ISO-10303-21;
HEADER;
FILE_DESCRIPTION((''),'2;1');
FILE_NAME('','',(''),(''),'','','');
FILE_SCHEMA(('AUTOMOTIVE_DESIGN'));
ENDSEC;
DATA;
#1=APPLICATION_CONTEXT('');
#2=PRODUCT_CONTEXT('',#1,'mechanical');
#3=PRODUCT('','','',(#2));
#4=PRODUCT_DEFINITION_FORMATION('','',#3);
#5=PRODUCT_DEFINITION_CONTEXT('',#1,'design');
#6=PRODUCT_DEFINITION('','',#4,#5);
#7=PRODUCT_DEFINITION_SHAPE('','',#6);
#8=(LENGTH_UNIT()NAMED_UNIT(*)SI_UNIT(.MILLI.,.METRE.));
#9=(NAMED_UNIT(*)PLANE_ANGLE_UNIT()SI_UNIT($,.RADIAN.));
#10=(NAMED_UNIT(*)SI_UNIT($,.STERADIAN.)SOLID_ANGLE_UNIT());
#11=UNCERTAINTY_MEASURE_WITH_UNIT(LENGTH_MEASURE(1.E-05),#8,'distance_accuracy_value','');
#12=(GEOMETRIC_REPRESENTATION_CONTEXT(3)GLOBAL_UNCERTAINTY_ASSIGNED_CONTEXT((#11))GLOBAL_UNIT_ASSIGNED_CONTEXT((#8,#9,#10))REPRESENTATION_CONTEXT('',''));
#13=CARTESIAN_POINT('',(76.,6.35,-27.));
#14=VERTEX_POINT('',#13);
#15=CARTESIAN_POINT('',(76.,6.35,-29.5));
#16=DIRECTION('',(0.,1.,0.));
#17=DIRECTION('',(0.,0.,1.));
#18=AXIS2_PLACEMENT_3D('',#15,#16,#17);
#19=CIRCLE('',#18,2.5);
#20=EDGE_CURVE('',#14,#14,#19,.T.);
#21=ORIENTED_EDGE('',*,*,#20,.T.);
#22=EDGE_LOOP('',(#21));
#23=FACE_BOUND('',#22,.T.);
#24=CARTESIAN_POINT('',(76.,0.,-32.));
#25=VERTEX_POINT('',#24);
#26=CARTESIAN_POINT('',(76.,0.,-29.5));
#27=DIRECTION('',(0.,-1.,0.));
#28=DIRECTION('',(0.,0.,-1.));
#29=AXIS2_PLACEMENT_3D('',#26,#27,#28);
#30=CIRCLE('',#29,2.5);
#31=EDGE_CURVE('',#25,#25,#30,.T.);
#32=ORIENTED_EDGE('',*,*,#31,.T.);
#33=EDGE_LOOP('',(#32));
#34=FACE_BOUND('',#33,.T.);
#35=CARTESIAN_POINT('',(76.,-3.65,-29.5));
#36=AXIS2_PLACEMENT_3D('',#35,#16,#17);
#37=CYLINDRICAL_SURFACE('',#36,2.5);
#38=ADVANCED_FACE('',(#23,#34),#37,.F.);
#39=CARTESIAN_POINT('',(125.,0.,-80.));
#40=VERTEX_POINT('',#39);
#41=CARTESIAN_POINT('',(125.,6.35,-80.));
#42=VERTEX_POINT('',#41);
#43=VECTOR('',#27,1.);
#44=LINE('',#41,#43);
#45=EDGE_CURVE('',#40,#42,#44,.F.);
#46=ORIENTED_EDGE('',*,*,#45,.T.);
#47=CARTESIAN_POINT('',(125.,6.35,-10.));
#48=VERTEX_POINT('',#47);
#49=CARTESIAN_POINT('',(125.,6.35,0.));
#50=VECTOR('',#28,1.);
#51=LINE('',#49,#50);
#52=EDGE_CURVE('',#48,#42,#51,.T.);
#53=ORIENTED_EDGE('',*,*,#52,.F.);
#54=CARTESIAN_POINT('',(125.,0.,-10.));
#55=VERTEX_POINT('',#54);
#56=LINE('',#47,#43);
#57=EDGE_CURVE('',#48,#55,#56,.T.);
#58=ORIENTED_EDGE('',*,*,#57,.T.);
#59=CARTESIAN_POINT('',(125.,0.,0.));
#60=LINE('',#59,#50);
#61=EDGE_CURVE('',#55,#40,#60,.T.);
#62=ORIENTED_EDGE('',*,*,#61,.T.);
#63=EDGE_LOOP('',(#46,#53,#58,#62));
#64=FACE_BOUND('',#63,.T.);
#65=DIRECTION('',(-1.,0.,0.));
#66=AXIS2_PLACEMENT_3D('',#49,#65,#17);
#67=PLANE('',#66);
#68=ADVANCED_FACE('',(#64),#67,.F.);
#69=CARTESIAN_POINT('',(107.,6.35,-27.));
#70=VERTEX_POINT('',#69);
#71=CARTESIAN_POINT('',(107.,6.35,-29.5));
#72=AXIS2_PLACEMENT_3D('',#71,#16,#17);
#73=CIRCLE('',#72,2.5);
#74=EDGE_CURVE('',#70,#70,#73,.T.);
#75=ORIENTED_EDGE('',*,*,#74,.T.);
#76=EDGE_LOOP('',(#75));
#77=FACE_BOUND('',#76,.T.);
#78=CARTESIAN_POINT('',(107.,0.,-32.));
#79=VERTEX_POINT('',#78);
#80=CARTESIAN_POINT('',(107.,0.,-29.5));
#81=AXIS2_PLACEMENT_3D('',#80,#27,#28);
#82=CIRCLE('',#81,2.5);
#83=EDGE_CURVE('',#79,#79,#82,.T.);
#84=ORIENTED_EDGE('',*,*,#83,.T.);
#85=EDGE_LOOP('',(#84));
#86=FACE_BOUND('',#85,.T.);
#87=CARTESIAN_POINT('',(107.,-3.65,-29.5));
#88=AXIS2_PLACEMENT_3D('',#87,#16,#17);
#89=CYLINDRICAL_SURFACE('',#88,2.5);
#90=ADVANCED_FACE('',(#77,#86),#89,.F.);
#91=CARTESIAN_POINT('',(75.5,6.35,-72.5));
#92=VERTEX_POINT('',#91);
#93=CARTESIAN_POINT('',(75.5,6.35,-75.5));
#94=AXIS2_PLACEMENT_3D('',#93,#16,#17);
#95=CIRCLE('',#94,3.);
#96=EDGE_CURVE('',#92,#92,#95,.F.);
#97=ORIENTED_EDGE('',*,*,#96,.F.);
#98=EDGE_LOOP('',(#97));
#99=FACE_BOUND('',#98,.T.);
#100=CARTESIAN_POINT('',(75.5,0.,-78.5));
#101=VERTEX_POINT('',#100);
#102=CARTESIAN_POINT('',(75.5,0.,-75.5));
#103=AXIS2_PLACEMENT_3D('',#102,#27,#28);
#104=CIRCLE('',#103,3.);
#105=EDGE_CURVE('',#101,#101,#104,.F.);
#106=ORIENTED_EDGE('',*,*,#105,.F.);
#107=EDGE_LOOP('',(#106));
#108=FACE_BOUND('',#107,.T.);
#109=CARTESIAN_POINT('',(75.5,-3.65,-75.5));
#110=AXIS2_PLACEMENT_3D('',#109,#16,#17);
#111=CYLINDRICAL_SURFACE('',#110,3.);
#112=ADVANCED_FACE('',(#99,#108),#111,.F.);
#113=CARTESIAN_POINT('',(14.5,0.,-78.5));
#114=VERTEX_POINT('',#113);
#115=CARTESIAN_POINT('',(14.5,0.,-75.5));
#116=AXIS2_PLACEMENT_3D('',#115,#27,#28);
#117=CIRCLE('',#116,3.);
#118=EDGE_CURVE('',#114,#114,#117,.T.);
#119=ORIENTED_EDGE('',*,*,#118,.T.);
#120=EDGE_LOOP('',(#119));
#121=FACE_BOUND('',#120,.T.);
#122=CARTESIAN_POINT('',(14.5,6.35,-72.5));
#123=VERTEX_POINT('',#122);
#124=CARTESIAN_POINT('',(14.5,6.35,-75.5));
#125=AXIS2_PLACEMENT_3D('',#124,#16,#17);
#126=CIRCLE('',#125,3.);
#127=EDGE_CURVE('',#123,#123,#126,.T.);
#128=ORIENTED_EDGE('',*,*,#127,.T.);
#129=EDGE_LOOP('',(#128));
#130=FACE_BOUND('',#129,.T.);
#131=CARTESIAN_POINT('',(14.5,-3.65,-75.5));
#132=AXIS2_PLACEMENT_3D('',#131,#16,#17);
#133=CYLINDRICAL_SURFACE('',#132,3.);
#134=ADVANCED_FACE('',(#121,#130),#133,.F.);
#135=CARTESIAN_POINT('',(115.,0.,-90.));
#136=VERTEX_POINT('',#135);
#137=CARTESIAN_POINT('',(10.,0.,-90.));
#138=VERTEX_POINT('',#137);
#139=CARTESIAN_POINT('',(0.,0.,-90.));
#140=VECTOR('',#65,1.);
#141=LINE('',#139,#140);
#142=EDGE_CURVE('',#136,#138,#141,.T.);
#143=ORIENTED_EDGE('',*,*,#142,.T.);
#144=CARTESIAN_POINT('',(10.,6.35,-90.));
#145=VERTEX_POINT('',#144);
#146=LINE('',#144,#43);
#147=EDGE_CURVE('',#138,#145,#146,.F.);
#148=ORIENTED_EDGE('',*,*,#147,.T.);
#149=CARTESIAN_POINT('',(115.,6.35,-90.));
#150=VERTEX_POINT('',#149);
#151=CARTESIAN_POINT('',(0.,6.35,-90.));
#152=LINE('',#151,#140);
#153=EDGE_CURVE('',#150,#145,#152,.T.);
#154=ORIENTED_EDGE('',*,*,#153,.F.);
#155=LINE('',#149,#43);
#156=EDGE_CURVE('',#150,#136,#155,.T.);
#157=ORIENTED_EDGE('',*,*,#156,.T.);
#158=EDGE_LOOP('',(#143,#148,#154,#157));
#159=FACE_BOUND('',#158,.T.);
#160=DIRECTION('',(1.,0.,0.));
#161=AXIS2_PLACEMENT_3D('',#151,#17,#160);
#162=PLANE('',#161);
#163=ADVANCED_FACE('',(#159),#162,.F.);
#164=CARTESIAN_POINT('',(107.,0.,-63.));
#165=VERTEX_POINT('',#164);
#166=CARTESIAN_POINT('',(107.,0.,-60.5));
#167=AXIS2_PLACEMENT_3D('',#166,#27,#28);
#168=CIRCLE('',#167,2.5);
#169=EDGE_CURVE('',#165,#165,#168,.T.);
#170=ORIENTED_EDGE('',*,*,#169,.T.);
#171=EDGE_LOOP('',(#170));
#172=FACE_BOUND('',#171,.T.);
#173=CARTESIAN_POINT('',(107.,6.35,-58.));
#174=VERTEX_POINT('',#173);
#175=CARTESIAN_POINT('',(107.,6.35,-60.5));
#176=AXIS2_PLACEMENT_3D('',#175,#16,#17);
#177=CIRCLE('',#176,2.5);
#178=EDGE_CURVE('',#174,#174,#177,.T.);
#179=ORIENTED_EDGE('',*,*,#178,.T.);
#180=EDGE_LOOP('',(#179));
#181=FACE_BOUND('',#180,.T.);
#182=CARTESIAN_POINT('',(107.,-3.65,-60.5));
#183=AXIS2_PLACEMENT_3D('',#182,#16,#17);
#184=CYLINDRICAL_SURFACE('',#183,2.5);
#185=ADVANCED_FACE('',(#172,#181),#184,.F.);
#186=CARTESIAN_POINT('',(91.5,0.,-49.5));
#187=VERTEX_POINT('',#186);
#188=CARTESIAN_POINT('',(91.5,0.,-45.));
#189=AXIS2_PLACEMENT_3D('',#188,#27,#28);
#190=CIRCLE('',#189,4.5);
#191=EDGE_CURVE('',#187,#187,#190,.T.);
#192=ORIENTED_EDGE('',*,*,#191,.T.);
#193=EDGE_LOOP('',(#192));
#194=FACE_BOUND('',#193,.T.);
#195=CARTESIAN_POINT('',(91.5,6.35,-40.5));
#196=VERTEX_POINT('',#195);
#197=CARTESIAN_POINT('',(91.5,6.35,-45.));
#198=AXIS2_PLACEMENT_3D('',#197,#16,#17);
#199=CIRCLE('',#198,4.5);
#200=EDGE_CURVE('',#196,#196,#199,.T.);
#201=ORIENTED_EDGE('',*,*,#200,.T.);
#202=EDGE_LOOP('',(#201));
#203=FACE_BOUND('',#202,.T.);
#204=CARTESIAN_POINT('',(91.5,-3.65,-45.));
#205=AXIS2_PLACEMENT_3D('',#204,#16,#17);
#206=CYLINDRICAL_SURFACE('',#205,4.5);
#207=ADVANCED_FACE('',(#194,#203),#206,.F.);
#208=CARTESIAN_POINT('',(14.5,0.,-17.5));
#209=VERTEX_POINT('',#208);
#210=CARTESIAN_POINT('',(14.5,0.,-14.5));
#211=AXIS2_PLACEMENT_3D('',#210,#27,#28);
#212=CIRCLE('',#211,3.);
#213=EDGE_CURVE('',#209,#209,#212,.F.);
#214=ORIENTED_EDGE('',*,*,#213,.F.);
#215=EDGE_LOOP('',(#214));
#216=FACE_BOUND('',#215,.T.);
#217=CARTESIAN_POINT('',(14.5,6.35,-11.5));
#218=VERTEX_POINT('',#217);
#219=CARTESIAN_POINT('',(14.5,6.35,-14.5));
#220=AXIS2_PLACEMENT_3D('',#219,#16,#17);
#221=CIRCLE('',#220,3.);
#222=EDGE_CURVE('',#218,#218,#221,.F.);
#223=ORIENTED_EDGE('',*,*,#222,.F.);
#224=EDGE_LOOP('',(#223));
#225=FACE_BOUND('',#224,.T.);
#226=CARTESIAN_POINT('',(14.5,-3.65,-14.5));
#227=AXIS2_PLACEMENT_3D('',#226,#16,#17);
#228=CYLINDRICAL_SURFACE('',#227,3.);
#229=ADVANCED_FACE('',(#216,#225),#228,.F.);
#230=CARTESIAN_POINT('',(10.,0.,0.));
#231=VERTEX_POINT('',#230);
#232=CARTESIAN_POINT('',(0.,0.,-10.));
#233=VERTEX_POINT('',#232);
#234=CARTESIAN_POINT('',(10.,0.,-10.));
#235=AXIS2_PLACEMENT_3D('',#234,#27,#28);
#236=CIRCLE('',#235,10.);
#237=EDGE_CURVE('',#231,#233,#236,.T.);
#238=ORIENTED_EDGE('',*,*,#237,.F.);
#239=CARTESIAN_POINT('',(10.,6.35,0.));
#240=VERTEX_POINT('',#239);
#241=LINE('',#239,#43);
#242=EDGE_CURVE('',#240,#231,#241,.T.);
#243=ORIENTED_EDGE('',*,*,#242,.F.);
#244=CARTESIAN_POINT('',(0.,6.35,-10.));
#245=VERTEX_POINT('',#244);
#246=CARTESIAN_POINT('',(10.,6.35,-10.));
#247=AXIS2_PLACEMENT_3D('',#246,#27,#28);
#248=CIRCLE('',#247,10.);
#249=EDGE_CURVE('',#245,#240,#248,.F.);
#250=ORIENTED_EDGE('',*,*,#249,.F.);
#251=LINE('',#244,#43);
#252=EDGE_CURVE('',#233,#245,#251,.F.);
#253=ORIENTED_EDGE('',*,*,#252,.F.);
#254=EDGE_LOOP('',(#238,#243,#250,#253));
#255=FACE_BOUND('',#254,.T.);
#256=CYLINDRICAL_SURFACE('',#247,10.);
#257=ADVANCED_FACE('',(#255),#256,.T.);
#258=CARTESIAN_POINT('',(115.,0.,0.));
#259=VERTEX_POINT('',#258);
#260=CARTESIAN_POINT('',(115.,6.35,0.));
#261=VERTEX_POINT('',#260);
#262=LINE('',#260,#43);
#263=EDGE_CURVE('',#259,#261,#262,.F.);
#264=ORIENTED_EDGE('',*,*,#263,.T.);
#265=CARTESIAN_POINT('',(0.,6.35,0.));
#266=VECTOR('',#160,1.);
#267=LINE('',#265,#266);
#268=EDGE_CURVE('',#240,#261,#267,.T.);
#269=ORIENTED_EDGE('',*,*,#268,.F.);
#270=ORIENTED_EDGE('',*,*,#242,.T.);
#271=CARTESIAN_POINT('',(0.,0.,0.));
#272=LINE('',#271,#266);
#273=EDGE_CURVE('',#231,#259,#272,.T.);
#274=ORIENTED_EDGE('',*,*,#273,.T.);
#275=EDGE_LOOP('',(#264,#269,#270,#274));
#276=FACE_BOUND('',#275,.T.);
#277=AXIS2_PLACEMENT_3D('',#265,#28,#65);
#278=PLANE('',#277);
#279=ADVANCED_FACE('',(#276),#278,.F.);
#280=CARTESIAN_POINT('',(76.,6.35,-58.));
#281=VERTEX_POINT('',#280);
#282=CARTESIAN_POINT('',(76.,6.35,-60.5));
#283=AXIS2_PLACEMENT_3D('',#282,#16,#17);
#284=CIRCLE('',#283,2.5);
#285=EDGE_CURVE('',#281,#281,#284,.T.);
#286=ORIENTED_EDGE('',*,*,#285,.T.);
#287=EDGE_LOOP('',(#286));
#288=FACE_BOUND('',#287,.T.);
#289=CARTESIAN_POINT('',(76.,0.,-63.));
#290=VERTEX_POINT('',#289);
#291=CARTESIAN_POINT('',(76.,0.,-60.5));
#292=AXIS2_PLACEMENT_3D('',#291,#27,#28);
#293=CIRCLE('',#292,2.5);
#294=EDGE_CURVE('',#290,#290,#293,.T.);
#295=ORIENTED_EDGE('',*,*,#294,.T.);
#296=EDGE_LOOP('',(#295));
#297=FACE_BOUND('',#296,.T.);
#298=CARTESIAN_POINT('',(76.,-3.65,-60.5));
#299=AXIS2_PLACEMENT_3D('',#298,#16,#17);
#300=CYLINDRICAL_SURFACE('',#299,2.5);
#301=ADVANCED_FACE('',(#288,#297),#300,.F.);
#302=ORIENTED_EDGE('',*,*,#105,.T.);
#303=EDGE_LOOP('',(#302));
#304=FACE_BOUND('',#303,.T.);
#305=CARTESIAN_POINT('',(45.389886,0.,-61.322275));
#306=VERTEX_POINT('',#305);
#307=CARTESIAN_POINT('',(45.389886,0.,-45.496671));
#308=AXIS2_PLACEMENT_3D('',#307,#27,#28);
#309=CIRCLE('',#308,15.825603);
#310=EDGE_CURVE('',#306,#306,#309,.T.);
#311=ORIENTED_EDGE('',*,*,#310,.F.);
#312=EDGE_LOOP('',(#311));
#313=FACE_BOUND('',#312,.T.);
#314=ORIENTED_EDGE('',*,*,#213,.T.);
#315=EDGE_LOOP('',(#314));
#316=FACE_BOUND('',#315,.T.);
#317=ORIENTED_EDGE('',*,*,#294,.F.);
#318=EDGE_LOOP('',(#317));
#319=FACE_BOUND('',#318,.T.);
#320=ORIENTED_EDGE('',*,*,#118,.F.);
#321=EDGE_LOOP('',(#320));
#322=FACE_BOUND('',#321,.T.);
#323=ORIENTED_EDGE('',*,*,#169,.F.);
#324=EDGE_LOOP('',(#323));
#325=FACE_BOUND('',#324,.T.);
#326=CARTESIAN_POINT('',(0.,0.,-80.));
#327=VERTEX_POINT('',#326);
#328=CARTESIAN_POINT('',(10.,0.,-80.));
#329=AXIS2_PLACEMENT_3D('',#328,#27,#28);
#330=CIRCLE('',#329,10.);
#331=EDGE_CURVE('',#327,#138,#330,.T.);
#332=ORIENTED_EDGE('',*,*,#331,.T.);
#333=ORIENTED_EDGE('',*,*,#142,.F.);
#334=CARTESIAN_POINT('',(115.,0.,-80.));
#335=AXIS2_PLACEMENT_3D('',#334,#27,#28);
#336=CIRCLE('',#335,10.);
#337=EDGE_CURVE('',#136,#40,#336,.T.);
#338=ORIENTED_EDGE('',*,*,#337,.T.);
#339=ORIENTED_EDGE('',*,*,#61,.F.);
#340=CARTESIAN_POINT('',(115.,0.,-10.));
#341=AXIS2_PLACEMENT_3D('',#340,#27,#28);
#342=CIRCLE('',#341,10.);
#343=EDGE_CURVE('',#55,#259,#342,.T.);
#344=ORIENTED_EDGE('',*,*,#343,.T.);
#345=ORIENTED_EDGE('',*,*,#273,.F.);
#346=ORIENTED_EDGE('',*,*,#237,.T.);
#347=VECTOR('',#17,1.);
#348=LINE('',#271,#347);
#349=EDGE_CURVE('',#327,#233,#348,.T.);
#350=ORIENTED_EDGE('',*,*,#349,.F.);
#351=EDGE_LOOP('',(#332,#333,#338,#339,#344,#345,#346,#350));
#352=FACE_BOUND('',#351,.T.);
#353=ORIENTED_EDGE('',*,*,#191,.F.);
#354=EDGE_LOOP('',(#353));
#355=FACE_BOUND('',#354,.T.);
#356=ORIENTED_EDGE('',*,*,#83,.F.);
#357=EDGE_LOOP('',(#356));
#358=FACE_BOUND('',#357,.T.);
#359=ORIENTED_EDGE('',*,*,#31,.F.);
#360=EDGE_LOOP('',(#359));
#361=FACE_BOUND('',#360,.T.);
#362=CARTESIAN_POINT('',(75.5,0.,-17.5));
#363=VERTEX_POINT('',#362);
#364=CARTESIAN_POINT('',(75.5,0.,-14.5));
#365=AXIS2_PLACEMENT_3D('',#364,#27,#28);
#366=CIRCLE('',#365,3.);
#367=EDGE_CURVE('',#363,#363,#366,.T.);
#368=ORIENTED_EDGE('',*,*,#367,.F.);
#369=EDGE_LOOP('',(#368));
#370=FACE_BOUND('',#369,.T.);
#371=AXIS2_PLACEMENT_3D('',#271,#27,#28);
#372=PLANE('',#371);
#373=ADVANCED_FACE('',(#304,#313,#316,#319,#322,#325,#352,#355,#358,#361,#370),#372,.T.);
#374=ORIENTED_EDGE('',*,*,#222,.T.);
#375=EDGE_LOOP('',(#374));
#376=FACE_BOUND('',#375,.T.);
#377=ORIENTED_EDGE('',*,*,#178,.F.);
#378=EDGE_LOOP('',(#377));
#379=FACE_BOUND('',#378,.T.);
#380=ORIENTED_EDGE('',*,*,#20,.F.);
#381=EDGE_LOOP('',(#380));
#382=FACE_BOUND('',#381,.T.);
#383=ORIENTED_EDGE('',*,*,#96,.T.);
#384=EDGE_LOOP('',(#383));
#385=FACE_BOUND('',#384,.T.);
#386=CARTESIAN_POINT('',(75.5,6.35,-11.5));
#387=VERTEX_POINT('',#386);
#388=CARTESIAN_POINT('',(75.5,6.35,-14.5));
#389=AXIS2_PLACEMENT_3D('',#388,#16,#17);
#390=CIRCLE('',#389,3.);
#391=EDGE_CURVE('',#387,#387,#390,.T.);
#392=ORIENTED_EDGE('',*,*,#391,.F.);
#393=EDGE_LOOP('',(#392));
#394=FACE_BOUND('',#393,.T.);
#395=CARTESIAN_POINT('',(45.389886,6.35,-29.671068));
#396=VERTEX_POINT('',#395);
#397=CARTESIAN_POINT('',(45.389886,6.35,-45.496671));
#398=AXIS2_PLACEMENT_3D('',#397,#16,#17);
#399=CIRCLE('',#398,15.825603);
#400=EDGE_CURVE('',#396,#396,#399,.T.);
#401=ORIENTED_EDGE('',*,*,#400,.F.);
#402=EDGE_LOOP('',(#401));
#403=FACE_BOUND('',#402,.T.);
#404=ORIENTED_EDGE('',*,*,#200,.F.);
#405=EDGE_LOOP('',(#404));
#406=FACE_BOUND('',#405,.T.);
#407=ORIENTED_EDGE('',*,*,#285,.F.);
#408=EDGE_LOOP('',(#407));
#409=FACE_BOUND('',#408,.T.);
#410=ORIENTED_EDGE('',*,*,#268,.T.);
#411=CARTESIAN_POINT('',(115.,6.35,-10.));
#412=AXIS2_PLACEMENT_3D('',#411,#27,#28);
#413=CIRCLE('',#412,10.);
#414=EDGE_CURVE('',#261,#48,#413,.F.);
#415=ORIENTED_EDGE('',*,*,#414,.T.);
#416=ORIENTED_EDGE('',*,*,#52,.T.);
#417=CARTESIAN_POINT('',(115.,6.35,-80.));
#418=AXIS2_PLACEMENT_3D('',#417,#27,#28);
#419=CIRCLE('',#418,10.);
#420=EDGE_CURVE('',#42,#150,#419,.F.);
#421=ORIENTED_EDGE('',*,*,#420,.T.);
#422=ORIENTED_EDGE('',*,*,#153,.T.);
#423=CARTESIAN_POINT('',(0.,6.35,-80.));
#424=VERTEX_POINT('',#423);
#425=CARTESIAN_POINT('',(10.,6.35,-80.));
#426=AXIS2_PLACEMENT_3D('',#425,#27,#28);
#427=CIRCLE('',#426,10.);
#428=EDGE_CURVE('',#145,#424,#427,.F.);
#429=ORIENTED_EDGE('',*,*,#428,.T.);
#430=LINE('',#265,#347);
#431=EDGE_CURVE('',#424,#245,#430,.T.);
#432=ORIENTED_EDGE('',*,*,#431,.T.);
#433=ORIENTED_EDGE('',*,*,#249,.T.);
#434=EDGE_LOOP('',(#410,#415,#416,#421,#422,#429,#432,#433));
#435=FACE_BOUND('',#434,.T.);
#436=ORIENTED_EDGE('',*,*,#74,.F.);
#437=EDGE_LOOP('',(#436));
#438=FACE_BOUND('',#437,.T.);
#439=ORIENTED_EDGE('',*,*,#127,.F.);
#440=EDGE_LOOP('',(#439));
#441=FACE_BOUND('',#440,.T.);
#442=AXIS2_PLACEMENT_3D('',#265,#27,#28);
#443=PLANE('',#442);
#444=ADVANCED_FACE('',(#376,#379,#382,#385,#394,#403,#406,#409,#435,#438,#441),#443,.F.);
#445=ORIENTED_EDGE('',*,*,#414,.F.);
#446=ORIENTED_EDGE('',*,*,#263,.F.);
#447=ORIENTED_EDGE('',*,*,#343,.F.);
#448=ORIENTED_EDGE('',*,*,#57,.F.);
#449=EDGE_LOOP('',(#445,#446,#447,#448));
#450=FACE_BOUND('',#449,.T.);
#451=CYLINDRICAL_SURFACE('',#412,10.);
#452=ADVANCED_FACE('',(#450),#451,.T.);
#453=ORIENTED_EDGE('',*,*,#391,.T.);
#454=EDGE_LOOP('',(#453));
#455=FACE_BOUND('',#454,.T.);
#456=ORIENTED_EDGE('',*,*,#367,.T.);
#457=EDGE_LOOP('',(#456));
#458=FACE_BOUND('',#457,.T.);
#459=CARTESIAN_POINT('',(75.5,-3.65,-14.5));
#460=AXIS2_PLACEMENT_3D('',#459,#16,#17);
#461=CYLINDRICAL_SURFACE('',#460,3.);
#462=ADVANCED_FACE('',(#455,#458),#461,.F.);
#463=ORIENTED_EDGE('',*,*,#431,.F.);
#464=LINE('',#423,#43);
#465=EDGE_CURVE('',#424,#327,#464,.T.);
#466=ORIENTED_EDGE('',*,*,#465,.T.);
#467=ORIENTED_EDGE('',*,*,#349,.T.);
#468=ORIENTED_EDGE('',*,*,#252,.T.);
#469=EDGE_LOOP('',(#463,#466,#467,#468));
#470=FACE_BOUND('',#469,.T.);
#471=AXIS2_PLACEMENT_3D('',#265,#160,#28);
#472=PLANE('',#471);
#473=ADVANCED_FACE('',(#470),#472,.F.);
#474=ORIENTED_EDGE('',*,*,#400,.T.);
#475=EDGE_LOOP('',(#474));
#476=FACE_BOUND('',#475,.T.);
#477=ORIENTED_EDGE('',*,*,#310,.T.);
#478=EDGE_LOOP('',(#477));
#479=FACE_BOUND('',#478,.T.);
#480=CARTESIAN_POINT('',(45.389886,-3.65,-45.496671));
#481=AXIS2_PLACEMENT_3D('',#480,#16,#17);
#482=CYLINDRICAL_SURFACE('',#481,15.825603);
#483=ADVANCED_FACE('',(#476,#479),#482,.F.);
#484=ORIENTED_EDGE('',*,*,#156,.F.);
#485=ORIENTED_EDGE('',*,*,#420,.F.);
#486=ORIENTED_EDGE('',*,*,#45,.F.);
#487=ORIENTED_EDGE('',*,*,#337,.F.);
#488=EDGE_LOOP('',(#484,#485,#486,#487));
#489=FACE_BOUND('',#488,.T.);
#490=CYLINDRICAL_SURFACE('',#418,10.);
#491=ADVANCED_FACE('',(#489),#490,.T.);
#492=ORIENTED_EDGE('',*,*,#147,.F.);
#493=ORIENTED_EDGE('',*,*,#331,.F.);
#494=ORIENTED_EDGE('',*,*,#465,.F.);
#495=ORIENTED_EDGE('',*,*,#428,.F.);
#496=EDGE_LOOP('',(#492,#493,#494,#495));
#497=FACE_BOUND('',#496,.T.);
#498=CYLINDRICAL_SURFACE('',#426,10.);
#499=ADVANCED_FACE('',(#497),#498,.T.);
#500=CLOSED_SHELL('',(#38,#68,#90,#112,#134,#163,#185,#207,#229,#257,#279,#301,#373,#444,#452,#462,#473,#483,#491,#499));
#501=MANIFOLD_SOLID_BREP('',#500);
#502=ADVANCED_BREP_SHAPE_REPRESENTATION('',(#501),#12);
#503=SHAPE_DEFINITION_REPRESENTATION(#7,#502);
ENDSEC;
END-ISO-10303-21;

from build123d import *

# Parameters (mm, degrees)
BOSS_EXTRUDE1_OUTLINE_W = 125
BOSS_EXTRUDE1_OUTLINE_H = 90
BOSS_EXTRUDE1_DEPTH     = 6.35
SKETCH2_R               = 3
CUT_EXTRUDE1_DEPTH      = 10
SKETCH3_R               = 4.5
SKETCH3_R_2             = 2.5
SERVO_CUTOUT_DEPTH      = 10
FILLET1_R               = 10
SKETCH4_R               = 15.825603453
CUT_EXTRUDE3_DEPTH      = 10


# Read off the part's stored shape, not the designer's step: Boss-Extrude1
with BuildPart() as part:
    # Boss-Extrude1 outline → Boss-Extrude1 (new body)
    with BuildSketch(Plane(origin=(0, 0, 0), x_dir=(1, 0, 0), z_dir=(0, 1, 0))):
        with Locations((62.5, 45)):
            Rectangle(BOSS_EXTRUDE1_OUTLINE_W, BOSS_EXTRUDE1_OUTLINE_H)
    extrude(amount=BOSS_EXTRUDE1_DEPTH)

    # Sketch2 → Cut-Extrude1 (cut)
    with BuildSketch(Plane(origin=(0, 6.35, 0), x_dir=(1, 0, 0), z_dir=(0, 1, 0))):
        with Locations(Location((14.5, 14.5, 0), (0, 0, 270))):
            Circle(SKETCH2_R)
        with Locations(Location((75.5, 14.5, 0), (0, 0, 270))):
            Circle(SKETCH2_R)
        with Locations(Location((75.5, 75.5, 0), (0, 0, 270))):
            Circle(SKETCH2_R)
        with Locations(Location((14.5, 75.5, 0), (0, 0, 270))):
            Circle(SKETCH2_R)
    extrude(amount=-CUT_EXTRUDE1_DEPTH, mode=Mode.SUBTRACT)

    # Sketch3 → Servo_Cutout (cut)
    with BuildSketch(Plane(origin=(0, 6.35, 0), x_dir=(1, 0, 0), z_dir=(0, 1, 0))):
        with Locations(Location((91.5, 45, 0), (0, 0, 270))):
            Circle(SKETCH3_R)
        with Locations(Location((107, 60.5, 0), (0, 0, 270))):
            Circle(SKETCH3_R_2)
        with Locations(Location((76, 60.5, 0), (0, 0, 270))):
            Circle(SKETCH3_R_2)
        with Locations(Location((76, 29.5, 0), (0, 0, 270))):
            Circle(SKETCH3_R_2)
        with Locations(Location((107, 29.5, 0), (0, 0, 270))):
            Circle(SKETCH3_R_2)
    extrude(amount=-SERVO_CUTOUT_DEPTH, mode=Mode.SUBTRACT)

    # Fillet1
    fillet1_edges = [part.edges().sort_by_distance(p)[0] for p in [
        (0, 3.175, -90),
        (125, 3.175, -90),
        (125, 3.175, 0),
        (0, 3.175, 0),
    ]]
    fillet(fillet1_edges, radius=FILLET1_R)

    # Sketch4 → Cut-Extrude3 (cut)
    with BuildSketch(Plane(origin=(0, 6.35, 0), x_dir=(1, 0, 0), z_dir=(0, 1, 0))):
        with Locations(Location((45.38988598, 45.496671395, 0), (0, 0, 270))):
            Circle(SKETCH4_R)
    extrude(amount=-CUT_EXTRUDE3_DEPTH, mode=Mode.SUBTRACT)


solid = part.part
